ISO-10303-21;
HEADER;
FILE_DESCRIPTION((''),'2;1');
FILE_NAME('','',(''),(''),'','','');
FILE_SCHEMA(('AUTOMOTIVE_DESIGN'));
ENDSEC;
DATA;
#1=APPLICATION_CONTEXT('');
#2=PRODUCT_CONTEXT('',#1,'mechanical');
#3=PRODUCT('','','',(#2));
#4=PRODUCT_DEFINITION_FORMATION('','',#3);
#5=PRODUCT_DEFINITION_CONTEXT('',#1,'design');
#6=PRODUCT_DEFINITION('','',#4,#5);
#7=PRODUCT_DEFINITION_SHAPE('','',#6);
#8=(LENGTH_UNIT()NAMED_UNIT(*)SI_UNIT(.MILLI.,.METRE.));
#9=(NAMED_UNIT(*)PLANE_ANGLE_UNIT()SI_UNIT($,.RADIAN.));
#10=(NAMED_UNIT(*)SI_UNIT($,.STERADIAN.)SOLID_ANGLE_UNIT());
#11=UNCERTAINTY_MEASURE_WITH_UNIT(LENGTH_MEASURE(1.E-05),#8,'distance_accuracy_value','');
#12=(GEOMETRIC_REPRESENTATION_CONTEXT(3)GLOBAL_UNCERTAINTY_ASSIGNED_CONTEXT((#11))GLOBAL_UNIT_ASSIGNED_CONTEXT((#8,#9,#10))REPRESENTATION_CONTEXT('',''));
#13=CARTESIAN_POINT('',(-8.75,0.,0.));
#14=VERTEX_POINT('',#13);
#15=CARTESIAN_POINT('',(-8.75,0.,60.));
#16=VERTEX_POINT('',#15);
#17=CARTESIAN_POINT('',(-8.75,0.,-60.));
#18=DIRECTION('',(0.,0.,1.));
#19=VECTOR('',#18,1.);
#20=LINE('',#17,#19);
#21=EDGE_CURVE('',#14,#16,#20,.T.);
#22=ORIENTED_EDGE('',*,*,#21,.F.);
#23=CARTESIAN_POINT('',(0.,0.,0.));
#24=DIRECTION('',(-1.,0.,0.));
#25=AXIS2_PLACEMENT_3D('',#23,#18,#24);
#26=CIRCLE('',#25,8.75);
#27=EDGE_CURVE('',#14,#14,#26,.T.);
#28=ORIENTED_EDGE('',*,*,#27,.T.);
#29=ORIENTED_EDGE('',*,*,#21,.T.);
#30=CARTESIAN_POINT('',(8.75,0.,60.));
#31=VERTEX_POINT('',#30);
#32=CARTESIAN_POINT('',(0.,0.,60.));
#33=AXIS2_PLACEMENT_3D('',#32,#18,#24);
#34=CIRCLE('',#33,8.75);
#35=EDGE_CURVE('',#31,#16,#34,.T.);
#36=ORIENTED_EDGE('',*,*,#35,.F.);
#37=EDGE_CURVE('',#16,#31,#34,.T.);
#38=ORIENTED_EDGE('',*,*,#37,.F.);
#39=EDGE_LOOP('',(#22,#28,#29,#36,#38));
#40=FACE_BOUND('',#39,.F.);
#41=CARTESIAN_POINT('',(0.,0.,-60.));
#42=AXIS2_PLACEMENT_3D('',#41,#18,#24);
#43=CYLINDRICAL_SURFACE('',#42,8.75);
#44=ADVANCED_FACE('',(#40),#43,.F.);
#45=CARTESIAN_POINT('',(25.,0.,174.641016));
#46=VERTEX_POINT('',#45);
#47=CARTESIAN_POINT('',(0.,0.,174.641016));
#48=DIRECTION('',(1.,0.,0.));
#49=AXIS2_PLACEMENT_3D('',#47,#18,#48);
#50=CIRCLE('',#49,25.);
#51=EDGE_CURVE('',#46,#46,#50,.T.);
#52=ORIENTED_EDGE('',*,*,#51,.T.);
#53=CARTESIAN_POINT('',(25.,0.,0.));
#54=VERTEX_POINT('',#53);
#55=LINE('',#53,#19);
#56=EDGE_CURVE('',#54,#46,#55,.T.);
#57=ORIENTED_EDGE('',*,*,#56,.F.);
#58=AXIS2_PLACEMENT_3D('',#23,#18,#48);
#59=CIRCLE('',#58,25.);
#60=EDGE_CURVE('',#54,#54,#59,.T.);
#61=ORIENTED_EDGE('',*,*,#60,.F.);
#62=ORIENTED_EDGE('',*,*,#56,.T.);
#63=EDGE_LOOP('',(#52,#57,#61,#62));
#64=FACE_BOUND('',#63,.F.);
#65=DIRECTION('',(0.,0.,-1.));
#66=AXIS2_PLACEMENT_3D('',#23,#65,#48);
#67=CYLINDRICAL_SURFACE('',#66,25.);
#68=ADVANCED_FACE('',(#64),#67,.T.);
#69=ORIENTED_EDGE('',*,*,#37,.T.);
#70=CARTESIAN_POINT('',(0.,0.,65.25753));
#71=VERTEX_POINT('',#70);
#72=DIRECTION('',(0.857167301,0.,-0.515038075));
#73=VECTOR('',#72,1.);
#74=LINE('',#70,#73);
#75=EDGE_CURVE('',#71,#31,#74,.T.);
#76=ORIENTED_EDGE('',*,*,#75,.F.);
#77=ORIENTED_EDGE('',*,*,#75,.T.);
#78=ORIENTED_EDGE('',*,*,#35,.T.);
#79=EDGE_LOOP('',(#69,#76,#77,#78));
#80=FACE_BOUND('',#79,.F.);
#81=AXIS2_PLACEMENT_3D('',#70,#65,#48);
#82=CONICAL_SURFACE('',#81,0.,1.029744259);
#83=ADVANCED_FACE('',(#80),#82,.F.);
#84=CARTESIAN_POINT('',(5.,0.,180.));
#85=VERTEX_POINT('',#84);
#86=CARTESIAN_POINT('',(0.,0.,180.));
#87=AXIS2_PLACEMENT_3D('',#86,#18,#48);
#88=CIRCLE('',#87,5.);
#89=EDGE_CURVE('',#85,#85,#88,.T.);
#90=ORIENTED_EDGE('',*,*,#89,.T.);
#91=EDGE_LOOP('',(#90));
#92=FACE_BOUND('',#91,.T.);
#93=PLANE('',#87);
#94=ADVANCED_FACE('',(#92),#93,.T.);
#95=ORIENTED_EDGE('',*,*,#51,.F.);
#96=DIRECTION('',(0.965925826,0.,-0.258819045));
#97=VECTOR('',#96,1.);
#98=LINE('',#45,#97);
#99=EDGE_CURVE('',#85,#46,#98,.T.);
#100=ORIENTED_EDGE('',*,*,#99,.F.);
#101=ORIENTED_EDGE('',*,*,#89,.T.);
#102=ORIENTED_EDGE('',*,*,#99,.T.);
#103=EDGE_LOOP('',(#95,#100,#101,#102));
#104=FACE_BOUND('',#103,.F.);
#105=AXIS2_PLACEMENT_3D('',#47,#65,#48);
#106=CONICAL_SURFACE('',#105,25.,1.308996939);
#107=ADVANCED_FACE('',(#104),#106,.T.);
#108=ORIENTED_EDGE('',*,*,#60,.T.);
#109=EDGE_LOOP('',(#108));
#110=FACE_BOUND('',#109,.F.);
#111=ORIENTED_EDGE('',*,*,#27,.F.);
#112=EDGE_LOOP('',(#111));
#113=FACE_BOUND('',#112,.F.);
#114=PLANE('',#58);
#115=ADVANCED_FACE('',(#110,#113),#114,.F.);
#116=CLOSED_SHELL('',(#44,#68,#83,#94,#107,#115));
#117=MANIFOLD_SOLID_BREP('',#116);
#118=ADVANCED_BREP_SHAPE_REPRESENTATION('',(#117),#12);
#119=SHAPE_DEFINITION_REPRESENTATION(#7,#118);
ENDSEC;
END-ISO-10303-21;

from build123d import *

# Parameters (mm, degrees)
F0_R     = 25
F1_DEPTH = 180
F2_SIZE2 = 5.3589838486
F2_SIZE  = 20
F4_D     = 17.5
F4_DEPTH = 60
F4_TIP   = 5.2575304165


with BuildPart() as f1:
    # F0 (on Top) → F1 (new body)
    with BuildSketch(Plane.XY):
        Circle(F0_R)
    extrude(amount=F1_DEPTH)

    # F2
    f2_edges = [f1.edges().sort_by_distance(p)[0] for p in [
        (-25, 0, 180),
    ]]
    f2_side = f1.faces().sort_by_distance((0, 0, 180))[0]
    chamfer(f2_edges, length=F2_SIZE, length2=F2_SIZE2, reference=f2_side)

    # F4
    with Locations(Plane(origin=(0, 0, 0), x_dir=(1, 0, 0), z_dir=(0, 0, -1))):
        with Locations((0, 0)):
            Hole(F4_D / 2, depth=F4_DEPTH)
            with Locations((0, 0, -(F4_DEPTH + F4_TIP / 2))):  # 118° drill point
                Cone(0, F4_D / 2, F4_TIP, mode=Mode.SUBTRACT)


solid = f1.part
